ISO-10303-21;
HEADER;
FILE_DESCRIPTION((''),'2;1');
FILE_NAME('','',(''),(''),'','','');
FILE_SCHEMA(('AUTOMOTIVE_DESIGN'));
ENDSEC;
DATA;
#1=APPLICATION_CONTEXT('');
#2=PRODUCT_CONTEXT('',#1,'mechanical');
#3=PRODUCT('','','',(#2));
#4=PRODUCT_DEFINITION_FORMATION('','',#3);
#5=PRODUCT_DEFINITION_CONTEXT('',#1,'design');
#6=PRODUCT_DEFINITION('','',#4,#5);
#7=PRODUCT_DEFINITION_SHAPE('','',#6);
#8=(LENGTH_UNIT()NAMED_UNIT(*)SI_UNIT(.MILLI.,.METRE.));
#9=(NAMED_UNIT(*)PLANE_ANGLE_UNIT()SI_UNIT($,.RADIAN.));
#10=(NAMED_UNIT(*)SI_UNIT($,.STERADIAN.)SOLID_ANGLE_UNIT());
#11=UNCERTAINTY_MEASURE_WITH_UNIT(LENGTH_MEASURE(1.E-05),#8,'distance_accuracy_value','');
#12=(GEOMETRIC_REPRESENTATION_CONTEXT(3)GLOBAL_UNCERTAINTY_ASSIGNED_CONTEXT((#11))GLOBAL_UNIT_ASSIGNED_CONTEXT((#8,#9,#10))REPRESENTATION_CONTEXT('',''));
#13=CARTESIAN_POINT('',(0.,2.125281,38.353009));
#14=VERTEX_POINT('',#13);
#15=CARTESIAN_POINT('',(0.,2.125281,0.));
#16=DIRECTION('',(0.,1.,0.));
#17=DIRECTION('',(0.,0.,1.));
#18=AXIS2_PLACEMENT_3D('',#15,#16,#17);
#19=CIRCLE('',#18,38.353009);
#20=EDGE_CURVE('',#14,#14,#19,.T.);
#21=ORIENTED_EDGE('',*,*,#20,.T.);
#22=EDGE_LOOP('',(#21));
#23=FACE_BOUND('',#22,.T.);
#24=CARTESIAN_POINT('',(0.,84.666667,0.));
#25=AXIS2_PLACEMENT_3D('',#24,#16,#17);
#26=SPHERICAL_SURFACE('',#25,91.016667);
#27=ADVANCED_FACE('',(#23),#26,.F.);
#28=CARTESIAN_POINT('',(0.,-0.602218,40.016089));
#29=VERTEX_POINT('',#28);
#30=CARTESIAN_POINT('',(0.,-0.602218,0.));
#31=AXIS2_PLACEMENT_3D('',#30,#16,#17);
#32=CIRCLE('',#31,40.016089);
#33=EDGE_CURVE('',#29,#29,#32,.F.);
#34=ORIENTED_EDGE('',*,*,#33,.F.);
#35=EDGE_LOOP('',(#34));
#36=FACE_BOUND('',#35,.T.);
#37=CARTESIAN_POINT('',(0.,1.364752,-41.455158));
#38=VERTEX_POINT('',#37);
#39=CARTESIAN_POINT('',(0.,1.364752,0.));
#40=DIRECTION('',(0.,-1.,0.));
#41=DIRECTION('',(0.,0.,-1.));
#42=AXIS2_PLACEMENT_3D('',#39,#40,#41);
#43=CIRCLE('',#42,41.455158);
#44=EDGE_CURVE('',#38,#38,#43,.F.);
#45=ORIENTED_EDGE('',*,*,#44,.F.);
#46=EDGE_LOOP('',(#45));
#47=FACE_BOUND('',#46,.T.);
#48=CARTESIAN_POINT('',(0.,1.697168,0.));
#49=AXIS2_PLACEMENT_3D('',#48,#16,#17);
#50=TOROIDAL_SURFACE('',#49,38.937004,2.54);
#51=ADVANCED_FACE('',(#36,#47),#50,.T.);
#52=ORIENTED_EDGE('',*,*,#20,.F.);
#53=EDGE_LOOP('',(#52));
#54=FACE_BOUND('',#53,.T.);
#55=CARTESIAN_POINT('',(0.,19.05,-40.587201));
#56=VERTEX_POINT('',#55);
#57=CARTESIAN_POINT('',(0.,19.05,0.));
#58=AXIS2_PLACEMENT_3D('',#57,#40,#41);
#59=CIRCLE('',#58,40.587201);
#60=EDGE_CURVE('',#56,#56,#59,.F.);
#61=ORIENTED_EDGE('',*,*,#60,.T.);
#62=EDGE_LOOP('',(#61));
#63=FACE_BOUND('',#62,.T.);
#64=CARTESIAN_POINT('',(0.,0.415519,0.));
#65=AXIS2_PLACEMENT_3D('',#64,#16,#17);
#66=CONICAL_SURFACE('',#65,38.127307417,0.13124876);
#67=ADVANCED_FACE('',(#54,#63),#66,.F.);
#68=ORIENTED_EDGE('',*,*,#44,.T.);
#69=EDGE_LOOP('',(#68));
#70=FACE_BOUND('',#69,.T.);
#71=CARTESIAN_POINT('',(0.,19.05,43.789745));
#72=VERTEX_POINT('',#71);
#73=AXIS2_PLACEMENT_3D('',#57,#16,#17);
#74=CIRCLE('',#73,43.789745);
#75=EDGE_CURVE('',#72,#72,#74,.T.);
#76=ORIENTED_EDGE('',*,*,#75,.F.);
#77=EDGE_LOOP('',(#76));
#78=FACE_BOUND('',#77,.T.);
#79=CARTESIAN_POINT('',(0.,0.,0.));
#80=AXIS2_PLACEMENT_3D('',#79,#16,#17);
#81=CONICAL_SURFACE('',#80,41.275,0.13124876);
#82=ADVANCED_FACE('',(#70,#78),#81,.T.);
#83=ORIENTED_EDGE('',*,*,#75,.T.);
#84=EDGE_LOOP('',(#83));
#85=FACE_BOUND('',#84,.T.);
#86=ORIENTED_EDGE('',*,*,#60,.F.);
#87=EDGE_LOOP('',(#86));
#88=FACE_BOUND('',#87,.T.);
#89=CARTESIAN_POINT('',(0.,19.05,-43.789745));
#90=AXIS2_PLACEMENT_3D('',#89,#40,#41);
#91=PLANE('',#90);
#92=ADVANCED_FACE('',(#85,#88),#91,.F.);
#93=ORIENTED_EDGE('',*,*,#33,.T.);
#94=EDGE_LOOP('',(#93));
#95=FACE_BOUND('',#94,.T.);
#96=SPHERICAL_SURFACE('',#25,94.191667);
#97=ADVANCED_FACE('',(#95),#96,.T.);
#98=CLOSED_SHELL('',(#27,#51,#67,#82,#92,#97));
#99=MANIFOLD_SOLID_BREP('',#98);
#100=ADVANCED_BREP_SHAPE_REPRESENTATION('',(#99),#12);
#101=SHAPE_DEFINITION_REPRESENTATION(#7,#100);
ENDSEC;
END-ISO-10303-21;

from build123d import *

# Parameters (mm, degrees)
DOME1_FACE_RADIUS = 41.275
DOME1_HEIGHT      = 9.525
FILLET1_R         = 2.54


# Read off the part's stored shape, not the designer's step: Shell1
with BuildPart() as part:
    # Sketch1 → Revolve1 (revolve)
    with BuildSketch(Plane(origin=(0, 0, 0), x_dir=(0, 0, -1), z_dir=(1, 0, 0)), mode=Mode.PRIVATE) as revolve1_sk:
        Polygon((0, 0), (41.275, 0), (43.78974535, 19.05), (0, 19.05), align=None)
    revolve(revolve1_sk.sketch.rotate(Axis((0, 0, 0), (0, -1, 0)), 180), axis=Axis((0, 0, 0), (0, -1, 0)))

    # Dome1: a dome of height H over a round flat face of radius A is a cap of a sphere of radius (A * A + H * H) / (2 * H)
    dome1_r = (DOME1_FACE_RADIUS * DOME1_FACE_RADIUS + DOME1_HEIGHT * DOME1_HEIGHT) / (2 * DOME1_HEIGHT)
    dome1_base = Plane((0, 0, 0), z_dir=(0, -1, 0))
    with Locations(dome1_base.offset(DOME1_HEIGHT - dome1_r)):
        dome1_ball = Sphere(dome1_r, mode=Mode.PRIVATE)
    add(split(dome1_ball, bisect_by=dome1_base, keep=Keep.TOP, mode=Mode.PRIVATE))

    # Fillet1
    fillet1_edges = [part.edges().sort_by_distance(p)[0] for p in [
        (41.275, 0, 0),
    ]]
    fillet(fillet1_edges, radius=FILLET1_R)

    # Shell1 outline → Shell1 (revolve, cut)
    with BuildSketch(Plane.XY):
        with BuildLine():
            Line((0, 19.05), (0, -6.35))
            ThreePointArc((0, -6.35), (19.639142672, -4.205925769), (38.353009101, 2.125281265))
            Line((38.353009101, 2.125281265), (40.587201031, 19.05))
            Line((40.587201031, 19.05), (0, 19.05))
        make_face()
    revolve(axis=Axis((0, 0, 0), (0, 1, 0)), mode=Mode.SUBTRACT)


solid = part.part
